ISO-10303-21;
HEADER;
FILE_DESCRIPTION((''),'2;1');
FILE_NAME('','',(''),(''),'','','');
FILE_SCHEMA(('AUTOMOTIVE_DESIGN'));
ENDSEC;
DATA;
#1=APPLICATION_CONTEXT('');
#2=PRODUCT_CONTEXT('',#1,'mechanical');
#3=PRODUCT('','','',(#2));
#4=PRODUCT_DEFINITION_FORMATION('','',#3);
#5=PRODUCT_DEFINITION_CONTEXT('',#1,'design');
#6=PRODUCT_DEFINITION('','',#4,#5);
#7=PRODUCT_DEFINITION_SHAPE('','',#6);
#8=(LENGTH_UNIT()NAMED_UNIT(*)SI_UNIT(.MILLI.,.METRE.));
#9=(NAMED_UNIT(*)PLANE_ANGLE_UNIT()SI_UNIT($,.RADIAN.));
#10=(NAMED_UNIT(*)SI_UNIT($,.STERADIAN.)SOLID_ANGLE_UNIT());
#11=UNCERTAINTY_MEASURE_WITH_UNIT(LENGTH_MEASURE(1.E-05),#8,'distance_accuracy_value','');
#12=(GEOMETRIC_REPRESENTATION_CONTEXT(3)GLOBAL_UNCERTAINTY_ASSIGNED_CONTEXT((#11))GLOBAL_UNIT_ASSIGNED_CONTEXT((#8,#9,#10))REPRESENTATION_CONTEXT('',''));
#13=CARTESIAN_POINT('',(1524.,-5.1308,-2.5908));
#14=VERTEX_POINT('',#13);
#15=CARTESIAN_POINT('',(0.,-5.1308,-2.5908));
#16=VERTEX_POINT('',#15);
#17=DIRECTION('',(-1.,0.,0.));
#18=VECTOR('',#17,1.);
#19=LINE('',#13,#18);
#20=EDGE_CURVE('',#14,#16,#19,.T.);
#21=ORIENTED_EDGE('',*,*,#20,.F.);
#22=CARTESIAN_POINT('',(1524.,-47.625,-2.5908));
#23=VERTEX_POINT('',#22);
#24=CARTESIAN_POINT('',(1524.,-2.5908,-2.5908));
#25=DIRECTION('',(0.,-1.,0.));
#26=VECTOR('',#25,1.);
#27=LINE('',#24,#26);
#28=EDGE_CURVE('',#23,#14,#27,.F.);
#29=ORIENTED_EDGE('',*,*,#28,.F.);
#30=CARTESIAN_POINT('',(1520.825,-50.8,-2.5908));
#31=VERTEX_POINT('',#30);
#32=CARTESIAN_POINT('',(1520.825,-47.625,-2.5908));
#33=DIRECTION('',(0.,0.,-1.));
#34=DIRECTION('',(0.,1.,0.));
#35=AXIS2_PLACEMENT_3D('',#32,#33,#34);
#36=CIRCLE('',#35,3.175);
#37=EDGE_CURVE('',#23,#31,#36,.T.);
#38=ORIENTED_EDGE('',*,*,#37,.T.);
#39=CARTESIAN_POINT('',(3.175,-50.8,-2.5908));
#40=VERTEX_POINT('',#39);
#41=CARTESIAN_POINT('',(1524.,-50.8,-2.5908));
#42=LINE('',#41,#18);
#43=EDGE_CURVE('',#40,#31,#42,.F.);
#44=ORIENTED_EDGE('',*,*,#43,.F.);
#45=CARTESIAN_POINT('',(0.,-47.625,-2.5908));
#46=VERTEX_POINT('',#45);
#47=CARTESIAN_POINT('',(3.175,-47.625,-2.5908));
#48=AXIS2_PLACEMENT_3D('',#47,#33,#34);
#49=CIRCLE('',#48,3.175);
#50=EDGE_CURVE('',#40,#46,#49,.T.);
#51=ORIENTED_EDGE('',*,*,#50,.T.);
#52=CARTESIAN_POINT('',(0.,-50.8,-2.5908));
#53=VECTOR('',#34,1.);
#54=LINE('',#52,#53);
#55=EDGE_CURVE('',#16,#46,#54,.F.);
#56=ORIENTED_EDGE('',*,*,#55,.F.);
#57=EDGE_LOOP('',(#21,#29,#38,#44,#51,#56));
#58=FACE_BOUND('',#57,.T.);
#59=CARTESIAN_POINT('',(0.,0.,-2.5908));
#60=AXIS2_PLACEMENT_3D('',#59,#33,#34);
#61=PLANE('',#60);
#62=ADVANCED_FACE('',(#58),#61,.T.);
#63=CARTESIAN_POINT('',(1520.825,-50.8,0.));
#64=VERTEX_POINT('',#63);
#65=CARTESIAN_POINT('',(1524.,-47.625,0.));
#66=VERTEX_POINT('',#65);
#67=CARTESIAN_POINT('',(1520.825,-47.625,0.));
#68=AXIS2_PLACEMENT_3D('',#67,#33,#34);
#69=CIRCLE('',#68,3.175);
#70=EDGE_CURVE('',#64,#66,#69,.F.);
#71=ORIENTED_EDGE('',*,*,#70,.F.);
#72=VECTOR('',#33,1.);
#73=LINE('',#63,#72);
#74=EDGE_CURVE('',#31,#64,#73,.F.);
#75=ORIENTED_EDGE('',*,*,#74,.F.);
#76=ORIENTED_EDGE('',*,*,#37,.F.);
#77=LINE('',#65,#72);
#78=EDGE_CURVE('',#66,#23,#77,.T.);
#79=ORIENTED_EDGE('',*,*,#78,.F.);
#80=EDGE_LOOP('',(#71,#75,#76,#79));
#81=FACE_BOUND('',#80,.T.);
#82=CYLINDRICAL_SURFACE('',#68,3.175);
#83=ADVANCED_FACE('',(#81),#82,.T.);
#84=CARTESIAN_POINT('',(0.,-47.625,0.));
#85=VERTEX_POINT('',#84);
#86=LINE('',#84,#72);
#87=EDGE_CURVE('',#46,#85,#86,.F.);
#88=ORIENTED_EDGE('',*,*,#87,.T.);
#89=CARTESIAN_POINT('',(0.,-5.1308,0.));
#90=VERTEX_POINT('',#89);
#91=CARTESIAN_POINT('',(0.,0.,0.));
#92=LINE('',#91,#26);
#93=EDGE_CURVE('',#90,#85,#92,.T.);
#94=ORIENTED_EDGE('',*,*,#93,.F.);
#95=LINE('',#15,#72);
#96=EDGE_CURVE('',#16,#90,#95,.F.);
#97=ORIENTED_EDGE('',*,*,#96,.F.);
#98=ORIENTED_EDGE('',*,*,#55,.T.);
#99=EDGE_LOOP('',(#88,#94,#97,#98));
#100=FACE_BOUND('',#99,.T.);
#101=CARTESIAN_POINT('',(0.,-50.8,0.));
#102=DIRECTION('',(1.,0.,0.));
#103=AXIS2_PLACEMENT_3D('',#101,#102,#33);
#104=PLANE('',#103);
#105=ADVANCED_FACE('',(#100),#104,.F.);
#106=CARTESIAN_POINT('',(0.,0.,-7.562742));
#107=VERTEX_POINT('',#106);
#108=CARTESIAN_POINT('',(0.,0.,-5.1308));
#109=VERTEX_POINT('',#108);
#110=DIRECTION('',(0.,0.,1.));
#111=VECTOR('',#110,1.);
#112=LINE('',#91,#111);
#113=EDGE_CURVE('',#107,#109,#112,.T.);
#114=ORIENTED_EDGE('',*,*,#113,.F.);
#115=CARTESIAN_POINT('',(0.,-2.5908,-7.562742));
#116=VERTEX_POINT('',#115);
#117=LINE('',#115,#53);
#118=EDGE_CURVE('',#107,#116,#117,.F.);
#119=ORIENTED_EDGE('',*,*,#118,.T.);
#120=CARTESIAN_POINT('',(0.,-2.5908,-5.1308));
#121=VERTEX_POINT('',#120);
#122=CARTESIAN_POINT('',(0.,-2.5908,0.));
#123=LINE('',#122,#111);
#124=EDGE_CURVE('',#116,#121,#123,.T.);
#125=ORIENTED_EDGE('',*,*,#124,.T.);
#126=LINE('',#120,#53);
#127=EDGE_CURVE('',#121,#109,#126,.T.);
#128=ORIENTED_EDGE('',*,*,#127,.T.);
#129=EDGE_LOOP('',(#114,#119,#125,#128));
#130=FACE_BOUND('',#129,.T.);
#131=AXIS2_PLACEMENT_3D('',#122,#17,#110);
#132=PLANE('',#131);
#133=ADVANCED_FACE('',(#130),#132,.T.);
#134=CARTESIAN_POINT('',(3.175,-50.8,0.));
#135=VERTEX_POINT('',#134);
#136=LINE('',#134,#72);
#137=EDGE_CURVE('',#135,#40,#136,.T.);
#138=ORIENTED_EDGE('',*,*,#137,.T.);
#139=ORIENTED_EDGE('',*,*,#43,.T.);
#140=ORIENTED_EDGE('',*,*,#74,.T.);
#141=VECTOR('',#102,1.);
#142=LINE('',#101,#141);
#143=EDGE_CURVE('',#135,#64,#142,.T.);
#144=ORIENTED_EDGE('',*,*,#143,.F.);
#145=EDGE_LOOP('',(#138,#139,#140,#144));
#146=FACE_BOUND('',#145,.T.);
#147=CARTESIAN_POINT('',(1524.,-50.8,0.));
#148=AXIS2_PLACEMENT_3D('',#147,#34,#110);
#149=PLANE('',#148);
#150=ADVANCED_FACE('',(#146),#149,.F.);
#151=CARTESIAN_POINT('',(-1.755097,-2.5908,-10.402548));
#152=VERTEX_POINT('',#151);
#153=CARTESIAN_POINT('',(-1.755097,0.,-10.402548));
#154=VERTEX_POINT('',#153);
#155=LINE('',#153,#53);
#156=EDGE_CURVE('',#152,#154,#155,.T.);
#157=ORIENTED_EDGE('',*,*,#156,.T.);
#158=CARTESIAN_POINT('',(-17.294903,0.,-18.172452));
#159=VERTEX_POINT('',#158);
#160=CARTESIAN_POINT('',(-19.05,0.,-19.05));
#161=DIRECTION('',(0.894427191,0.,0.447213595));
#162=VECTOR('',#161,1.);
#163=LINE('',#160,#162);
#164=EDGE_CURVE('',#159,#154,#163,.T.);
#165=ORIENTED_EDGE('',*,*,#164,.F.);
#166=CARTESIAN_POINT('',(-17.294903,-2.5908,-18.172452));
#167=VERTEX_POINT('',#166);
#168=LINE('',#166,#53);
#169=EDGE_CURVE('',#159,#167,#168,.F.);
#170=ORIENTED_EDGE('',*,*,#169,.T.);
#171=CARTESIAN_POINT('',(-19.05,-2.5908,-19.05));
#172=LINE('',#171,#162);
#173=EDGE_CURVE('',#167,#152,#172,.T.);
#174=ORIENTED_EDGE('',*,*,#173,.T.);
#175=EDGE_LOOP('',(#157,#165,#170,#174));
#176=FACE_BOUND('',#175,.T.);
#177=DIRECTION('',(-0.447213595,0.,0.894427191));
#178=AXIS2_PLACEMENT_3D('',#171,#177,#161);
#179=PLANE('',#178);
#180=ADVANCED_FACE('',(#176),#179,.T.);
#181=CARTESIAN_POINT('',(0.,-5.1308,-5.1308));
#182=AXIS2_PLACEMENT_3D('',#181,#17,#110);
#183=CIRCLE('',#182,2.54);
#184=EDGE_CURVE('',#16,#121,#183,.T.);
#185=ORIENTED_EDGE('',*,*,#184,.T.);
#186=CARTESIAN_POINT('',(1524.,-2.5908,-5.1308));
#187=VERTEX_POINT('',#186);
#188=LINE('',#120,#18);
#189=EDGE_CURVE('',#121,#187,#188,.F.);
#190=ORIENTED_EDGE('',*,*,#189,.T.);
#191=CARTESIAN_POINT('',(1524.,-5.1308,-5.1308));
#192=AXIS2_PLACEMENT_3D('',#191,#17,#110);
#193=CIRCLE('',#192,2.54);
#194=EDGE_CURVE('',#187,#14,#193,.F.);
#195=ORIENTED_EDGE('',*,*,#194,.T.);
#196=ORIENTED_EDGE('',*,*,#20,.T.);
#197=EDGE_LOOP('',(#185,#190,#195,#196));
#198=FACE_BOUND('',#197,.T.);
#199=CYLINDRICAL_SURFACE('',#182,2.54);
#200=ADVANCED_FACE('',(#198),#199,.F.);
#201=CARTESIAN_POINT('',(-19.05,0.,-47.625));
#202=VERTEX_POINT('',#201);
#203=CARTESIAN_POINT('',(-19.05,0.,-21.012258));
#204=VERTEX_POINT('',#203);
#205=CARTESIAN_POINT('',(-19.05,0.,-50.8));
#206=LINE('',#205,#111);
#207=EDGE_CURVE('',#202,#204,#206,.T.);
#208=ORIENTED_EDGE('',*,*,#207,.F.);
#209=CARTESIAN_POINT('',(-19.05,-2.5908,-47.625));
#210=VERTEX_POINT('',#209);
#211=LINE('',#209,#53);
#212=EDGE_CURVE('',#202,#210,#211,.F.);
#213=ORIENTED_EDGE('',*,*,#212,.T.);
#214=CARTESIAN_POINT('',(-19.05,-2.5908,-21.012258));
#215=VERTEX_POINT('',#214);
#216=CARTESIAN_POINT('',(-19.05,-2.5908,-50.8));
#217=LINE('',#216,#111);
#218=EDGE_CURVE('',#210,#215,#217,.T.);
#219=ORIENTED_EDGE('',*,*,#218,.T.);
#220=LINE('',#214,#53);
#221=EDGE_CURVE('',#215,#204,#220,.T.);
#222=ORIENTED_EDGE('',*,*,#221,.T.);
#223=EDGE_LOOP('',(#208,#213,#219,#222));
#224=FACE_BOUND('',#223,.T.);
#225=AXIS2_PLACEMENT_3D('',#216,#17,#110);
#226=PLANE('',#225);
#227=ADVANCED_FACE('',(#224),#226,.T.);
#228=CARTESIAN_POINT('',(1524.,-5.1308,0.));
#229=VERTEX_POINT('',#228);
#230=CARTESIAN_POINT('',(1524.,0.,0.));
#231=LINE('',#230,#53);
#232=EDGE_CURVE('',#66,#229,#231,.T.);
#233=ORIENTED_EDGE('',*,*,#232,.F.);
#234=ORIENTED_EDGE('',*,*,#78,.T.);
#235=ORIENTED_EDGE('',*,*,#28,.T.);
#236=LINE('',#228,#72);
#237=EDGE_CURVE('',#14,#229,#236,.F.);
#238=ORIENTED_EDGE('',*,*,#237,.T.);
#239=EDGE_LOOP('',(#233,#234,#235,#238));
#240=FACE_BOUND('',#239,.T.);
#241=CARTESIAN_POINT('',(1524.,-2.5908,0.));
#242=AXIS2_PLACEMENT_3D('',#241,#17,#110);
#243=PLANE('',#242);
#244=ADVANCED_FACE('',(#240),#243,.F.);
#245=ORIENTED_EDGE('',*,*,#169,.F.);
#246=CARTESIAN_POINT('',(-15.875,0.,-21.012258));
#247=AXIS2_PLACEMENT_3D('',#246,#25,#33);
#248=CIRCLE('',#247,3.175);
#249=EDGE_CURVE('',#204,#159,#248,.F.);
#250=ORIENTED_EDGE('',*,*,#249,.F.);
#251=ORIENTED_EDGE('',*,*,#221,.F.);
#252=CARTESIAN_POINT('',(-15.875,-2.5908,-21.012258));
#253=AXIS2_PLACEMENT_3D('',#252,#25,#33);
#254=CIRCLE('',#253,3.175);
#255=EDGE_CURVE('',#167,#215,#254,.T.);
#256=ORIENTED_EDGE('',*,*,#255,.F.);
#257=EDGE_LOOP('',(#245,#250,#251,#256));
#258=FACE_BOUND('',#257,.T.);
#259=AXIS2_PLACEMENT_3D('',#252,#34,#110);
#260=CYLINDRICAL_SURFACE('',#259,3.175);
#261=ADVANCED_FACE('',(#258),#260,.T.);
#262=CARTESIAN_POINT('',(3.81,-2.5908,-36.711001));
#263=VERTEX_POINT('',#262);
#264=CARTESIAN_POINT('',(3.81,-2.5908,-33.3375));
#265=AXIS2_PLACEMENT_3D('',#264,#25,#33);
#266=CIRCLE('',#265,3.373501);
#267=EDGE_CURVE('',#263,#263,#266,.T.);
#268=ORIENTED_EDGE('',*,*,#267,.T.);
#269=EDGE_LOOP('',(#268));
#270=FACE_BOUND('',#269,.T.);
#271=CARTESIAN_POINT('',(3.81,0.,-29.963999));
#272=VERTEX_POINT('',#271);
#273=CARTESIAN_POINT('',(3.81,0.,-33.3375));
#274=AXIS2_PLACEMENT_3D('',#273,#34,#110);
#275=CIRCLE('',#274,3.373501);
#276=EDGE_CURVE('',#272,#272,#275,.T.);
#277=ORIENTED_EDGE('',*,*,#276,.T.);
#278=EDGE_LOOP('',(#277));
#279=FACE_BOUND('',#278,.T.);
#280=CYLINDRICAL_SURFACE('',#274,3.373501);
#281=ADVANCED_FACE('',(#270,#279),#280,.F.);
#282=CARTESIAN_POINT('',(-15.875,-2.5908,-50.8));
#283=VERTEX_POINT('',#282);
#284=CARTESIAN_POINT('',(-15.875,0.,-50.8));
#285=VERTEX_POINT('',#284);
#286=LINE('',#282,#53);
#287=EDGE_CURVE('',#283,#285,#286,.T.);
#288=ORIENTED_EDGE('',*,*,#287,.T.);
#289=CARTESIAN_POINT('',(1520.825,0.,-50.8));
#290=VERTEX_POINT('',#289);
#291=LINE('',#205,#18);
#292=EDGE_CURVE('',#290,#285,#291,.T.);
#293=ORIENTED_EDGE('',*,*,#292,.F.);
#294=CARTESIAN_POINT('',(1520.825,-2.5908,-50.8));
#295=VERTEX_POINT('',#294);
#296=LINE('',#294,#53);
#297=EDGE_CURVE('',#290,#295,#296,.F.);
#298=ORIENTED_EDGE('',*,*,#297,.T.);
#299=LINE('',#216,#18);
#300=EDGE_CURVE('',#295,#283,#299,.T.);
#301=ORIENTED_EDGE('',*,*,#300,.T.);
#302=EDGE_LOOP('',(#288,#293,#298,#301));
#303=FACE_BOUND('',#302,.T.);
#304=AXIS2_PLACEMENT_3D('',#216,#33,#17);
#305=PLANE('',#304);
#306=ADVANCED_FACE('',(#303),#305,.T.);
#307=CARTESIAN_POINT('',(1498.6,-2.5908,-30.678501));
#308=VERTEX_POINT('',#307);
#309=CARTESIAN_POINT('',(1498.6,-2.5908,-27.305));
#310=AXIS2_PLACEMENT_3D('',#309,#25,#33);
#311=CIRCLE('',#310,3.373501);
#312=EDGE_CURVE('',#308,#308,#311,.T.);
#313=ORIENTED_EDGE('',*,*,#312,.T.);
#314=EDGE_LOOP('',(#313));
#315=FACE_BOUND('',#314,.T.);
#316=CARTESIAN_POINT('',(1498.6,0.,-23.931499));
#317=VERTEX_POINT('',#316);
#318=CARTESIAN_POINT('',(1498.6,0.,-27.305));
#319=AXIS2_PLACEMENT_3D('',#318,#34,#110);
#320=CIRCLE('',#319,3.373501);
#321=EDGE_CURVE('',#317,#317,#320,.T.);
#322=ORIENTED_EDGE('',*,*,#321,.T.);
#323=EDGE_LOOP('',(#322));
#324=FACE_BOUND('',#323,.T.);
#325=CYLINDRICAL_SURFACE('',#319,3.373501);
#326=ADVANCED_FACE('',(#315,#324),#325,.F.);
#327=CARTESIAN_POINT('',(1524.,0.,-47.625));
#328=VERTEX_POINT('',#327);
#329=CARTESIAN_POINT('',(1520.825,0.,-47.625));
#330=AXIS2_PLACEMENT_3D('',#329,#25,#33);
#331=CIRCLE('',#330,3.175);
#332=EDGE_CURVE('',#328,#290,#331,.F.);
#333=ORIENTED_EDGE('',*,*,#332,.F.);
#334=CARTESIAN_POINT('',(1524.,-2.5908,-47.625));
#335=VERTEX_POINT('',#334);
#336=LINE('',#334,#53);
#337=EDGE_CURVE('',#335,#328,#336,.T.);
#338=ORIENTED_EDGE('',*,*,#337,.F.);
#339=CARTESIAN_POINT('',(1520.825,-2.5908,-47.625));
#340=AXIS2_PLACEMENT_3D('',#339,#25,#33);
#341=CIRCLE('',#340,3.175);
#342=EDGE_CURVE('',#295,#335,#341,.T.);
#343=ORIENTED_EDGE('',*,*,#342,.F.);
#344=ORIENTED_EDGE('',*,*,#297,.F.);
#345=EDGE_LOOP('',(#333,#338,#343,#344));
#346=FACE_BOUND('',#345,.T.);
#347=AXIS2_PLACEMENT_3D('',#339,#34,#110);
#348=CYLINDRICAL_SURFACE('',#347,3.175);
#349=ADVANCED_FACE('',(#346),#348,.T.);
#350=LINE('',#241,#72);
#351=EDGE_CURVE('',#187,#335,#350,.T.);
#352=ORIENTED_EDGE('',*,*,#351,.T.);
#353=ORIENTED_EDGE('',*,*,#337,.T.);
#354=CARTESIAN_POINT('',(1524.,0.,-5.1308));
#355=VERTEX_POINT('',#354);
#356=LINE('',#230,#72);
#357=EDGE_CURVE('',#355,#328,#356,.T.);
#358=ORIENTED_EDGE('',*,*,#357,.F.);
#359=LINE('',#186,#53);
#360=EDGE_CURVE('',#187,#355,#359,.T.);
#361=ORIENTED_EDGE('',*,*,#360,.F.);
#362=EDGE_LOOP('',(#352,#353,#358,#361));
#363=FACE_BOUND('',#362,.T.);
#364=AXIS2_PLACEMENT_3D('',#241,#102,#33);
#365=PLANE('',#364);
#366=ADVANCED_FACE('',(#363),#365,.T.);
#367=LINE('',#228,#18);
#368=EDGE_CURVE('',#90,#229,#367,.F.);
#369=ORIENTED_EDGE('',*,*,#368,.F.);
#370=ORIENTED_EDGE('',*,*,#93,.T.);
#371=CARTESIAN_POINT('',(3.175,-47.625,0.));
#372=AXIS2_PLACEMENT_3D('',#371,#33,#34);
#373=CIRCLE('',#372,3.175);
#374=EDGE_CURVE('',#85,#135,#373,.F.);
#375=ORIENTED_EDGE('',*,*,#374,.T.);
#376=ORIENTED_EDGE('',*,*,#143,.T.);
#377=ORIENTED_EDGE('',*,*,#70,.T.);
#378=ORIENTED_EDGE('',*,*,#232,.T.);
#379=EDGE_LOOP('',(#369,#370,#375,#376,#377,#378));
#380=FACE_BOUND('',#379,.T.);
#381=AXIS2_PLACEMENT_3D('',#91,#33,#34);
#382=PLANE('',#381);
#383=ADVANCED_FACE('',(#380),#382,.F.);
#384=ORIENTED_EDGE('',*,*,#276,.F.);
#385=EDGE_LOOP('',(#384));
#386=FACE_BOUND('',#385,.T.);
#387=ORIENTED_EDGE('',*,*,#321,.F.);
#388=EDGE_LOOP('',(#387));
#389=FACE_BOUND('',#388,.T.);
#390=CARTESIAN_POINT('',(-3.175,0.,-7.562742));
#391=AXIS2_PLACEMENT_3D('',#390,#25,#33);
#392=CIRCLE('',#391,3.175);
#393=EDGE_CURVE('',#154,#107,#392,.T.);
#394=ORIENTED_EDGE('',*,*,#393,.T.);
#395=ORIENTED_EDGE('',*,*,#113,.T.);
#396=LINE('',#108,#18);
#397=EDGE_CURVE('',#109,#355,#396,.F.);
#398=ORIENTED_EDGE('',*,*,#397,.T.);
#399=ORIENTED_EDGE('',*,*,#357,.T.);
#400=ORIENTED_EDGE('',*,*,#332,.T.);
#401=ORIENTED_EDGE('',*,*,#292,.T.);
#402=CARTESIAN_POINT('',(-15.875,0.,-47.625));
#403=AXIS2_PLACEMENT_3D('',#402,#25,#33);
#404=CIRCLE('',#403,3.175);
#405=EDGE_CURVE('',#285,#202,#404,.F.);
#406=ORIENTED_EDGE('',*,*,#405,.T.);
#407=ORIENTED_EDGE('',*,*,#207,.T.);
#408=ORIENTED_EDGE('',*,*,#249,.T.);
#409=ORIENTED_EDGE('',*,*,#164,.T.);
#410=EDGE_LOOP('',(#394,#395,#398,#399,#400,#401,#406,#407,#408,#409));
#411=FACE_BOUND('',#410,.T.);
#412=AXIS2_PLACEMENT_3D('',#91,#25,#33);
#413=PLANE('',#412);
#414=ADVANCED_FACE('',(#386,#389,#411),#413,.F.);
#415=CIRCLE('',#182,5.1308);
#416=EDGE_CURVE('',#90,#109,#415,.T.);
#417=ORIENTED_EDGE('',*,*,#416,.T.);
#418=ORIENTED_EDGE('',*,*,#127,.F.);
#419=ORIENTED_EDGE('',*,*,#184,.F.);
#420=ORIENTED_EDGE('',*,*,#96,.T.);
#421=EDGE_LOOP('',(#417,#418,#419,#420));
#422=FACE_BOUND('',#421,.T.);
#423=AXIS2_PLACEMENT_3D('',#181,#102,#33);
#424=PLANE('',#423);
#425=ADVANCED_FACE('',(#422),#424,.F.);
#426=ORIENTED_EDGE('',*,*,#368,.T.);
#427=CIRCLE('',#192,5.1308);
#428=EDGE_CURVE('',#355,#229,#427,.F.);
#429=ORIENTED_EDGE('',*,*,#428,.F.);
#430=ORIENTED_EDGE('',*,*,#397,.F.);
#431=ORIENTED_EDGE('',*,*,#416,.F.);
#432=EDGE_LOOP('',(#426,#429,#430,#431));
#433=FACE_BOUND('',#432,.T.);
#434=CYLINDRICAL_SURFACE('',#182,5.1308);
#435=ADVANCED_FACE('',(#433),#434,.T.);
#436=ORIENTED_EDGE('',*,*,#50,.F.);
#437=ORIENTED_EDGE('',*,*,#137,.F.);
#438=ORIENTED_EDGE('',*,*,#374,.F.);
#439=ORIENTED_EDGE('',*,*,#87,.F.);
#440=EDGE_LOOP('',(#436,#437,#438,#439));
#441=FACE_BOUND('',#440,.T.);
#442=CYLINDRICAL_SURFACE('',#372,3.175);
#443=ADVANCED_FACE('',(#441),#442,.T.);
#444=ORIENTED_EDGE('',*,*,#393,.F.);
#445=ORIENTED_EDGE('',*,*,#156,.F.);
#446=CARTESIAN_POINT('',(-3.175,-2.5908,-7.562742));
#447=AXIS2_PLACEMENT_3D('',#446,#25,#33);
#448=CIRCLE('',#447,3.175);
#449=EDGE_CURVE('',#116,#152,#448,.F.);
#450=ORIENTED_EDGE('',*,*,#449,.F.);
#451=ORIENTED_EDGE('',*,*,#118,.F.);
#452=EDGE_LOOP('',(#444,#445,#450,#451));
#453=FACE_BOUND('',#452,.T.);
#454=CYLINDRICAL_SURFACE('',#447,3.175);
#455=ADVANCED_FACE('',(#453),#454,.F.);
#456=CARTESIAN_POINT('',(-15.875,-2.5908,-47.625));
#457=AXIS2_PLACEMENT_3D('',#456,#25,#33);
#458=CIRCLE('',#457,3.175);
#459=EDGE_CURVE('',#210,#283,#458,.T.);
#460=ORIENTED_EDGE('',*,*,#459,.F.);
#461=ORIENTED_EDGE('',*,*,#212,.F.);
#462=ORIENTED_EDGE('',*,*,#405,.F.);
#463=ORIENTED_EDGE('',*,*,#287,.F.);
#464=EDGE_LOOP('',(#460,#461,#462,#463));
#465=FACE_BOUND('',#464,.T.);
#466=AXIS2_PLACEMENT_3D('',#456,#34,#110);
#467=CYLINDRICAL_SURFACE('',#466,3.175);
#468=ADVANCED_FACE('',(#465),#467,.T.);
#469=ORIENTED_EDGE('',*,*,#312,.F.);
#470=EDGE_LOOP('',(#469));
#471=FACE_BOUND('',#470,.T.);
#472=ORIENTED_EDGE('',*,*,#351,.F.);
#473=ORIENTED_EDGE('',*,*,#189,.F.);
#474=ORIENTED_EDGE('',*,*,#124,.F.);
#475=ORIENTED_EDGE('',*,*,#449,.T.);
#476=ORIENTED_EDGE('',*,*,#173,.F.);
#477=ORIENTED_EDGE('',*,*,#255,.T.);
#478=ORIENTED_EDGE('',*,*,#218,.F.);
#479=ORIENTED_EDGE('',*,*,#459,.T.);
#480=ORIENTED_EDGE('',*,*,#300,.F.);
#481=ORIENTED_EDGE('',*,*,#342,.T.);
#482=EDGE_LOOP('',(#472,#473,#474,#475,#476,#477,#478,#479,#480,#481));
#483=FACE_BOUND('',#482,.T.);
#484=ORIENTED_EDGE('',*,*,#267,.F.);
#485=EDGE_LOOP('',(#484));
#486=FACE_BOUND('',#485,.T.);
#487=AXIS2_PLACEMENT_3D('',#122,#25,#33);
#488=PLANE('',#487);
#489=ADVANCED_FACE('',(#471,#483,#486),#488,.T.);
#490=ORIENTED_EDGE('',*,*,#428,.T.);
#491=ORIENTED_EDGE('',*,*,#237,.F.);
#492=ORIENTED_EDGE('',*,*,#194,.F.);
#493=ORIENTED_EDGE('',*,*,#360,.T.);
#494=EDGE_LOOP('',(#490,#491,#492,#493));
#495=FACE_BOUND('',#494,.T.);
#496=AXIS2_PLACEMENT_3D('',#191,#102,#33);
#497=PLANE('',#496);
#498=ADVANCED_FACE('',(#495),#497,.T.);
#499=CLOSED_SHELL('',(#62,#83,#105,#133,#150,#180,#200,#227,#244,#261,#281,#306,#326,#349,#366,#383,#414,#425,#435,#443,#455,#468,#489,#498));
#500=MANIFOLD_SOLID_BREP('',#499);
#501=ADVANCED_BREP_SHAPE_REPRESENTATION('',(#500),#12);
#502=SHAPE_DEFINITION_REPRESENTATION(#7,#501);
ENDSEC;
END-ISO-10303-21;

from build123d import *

# Parameters (mm, degrees)
BASE_FLANGE1_DEPTH               = 2.5908
EDGE_FLANGE1_STRIP_W             = 15.4432
EDGE_FLANGE1_STRIP_H             = 2.5908
EDGE_FLANGE1_STRIP_CUT_DEPTH     = 1524
EDGE_FLANGE1_DEPTH               = 1524
F_17_64_0_26563_DIAMETER_HOLE1_D = 6.747002
FILLET1_R                        = 3.175
F_17_64_0_26563_DIAMETER_HOLE2_D = 6.747002


# Sheet-metal steps are written as plain solids
with BuildPart() as part:
    # Sketch2 → Base-Flange1 (new body)
    with BuildSketch(Plane(origin=(0, 0, 0), x_dir=(1, 0, 0), z_dir=(0, 1, 0))):
        Polygon((0, 0), (1524, 0), (1524, 50.8), (-19.05, 50.8), (-19.05, 19.05), (0, 9.525), align=None)
    extrude(amount=-BASE_FLANGE1_DEPTH)

    # Edge-Flange1 strip (across the edge) → Edge-Flange1 strip cut (cut)
    with BuildSketch(Plane(origin=(1524, -2.5908, 0), x_dir=(0, 0, -1), z_dir=(-1, 0, 0))):
        with Locations((-2.5908, -1.2954)):
            Rectangle(EDGE_FLANGE1_STRIP_W, EDGE_FLANGE1_STRIP_H)
    extrude(amount=EDGE_FLANGE1_STRIP_CUT_DEPTH, mode=Mode.SUBTRACT)

    # Edge-Flange1 section (across the edge) → Edge-Flange1 (add)
    with BuildSketch(Plane(origin=(1524, -2.5908, 0), x_dir=(0, 0, -1), z_dir=(-1, 0, 0))):
        with BuildLine():
            Line((0, 2.54), (0, 48.2092))
            Line((0, 48.2092), (2.5908, 48.2092))
            Line((2.5908, 48.2092), (2.5908, 2.54))
            ThreePointArc((2.5908, 2.54), (3.334748776, 0.743948776), (5.1308, 0))
            Line((5.1308, 0), (5.1308, -2.5908))
            ThreePointArc((5.1308, -2.5908), (1.502776527, -1.088023473), (0, 2.54))
        make_face()
    extrude(amount=EDGE_FLANGE1_DEPTH)

    # 17/64 (0.26563) Diameter Hole1 (through all)
    with Locations(Plane(origin=(0, 0, 0), x_dir=(1, 0, 0), z_dir=(0, 1, 0))):
        with Locations((1498.6, 27.305)):
            Hole(F_17_64_0_26563_DIAMETER_HOLE1_D / 2)

    # Fillet1
    fillet1_edges = [part.edges().sort_by_distance(p)[0] for p in [
        (0, -1.2954, -9.525),
        (-19.05, -1.2954, -19.05),
        (-19.05, -1.2954, -50.8),
        (1524, -1.2954, -50.8),
        (1524, -50.8, -1.2954),
        (0, -50.8, -1.2954),
    ]]
    fillet(fillet1_edges, radius=FILLET1_R)

    # 17/64 (0.26563) Diameter Hole2 (through all)
    with Locations(Plane(origin=(0, 0, 0), x_dir=(1, 0, 0), z_dir=(0, 1, 0))):
        with Locations((3.81, 33.3375)):
            Hole(F_17_64_0_26563_DIAMETER_HOLE2_D / 2)


solid = part.part
